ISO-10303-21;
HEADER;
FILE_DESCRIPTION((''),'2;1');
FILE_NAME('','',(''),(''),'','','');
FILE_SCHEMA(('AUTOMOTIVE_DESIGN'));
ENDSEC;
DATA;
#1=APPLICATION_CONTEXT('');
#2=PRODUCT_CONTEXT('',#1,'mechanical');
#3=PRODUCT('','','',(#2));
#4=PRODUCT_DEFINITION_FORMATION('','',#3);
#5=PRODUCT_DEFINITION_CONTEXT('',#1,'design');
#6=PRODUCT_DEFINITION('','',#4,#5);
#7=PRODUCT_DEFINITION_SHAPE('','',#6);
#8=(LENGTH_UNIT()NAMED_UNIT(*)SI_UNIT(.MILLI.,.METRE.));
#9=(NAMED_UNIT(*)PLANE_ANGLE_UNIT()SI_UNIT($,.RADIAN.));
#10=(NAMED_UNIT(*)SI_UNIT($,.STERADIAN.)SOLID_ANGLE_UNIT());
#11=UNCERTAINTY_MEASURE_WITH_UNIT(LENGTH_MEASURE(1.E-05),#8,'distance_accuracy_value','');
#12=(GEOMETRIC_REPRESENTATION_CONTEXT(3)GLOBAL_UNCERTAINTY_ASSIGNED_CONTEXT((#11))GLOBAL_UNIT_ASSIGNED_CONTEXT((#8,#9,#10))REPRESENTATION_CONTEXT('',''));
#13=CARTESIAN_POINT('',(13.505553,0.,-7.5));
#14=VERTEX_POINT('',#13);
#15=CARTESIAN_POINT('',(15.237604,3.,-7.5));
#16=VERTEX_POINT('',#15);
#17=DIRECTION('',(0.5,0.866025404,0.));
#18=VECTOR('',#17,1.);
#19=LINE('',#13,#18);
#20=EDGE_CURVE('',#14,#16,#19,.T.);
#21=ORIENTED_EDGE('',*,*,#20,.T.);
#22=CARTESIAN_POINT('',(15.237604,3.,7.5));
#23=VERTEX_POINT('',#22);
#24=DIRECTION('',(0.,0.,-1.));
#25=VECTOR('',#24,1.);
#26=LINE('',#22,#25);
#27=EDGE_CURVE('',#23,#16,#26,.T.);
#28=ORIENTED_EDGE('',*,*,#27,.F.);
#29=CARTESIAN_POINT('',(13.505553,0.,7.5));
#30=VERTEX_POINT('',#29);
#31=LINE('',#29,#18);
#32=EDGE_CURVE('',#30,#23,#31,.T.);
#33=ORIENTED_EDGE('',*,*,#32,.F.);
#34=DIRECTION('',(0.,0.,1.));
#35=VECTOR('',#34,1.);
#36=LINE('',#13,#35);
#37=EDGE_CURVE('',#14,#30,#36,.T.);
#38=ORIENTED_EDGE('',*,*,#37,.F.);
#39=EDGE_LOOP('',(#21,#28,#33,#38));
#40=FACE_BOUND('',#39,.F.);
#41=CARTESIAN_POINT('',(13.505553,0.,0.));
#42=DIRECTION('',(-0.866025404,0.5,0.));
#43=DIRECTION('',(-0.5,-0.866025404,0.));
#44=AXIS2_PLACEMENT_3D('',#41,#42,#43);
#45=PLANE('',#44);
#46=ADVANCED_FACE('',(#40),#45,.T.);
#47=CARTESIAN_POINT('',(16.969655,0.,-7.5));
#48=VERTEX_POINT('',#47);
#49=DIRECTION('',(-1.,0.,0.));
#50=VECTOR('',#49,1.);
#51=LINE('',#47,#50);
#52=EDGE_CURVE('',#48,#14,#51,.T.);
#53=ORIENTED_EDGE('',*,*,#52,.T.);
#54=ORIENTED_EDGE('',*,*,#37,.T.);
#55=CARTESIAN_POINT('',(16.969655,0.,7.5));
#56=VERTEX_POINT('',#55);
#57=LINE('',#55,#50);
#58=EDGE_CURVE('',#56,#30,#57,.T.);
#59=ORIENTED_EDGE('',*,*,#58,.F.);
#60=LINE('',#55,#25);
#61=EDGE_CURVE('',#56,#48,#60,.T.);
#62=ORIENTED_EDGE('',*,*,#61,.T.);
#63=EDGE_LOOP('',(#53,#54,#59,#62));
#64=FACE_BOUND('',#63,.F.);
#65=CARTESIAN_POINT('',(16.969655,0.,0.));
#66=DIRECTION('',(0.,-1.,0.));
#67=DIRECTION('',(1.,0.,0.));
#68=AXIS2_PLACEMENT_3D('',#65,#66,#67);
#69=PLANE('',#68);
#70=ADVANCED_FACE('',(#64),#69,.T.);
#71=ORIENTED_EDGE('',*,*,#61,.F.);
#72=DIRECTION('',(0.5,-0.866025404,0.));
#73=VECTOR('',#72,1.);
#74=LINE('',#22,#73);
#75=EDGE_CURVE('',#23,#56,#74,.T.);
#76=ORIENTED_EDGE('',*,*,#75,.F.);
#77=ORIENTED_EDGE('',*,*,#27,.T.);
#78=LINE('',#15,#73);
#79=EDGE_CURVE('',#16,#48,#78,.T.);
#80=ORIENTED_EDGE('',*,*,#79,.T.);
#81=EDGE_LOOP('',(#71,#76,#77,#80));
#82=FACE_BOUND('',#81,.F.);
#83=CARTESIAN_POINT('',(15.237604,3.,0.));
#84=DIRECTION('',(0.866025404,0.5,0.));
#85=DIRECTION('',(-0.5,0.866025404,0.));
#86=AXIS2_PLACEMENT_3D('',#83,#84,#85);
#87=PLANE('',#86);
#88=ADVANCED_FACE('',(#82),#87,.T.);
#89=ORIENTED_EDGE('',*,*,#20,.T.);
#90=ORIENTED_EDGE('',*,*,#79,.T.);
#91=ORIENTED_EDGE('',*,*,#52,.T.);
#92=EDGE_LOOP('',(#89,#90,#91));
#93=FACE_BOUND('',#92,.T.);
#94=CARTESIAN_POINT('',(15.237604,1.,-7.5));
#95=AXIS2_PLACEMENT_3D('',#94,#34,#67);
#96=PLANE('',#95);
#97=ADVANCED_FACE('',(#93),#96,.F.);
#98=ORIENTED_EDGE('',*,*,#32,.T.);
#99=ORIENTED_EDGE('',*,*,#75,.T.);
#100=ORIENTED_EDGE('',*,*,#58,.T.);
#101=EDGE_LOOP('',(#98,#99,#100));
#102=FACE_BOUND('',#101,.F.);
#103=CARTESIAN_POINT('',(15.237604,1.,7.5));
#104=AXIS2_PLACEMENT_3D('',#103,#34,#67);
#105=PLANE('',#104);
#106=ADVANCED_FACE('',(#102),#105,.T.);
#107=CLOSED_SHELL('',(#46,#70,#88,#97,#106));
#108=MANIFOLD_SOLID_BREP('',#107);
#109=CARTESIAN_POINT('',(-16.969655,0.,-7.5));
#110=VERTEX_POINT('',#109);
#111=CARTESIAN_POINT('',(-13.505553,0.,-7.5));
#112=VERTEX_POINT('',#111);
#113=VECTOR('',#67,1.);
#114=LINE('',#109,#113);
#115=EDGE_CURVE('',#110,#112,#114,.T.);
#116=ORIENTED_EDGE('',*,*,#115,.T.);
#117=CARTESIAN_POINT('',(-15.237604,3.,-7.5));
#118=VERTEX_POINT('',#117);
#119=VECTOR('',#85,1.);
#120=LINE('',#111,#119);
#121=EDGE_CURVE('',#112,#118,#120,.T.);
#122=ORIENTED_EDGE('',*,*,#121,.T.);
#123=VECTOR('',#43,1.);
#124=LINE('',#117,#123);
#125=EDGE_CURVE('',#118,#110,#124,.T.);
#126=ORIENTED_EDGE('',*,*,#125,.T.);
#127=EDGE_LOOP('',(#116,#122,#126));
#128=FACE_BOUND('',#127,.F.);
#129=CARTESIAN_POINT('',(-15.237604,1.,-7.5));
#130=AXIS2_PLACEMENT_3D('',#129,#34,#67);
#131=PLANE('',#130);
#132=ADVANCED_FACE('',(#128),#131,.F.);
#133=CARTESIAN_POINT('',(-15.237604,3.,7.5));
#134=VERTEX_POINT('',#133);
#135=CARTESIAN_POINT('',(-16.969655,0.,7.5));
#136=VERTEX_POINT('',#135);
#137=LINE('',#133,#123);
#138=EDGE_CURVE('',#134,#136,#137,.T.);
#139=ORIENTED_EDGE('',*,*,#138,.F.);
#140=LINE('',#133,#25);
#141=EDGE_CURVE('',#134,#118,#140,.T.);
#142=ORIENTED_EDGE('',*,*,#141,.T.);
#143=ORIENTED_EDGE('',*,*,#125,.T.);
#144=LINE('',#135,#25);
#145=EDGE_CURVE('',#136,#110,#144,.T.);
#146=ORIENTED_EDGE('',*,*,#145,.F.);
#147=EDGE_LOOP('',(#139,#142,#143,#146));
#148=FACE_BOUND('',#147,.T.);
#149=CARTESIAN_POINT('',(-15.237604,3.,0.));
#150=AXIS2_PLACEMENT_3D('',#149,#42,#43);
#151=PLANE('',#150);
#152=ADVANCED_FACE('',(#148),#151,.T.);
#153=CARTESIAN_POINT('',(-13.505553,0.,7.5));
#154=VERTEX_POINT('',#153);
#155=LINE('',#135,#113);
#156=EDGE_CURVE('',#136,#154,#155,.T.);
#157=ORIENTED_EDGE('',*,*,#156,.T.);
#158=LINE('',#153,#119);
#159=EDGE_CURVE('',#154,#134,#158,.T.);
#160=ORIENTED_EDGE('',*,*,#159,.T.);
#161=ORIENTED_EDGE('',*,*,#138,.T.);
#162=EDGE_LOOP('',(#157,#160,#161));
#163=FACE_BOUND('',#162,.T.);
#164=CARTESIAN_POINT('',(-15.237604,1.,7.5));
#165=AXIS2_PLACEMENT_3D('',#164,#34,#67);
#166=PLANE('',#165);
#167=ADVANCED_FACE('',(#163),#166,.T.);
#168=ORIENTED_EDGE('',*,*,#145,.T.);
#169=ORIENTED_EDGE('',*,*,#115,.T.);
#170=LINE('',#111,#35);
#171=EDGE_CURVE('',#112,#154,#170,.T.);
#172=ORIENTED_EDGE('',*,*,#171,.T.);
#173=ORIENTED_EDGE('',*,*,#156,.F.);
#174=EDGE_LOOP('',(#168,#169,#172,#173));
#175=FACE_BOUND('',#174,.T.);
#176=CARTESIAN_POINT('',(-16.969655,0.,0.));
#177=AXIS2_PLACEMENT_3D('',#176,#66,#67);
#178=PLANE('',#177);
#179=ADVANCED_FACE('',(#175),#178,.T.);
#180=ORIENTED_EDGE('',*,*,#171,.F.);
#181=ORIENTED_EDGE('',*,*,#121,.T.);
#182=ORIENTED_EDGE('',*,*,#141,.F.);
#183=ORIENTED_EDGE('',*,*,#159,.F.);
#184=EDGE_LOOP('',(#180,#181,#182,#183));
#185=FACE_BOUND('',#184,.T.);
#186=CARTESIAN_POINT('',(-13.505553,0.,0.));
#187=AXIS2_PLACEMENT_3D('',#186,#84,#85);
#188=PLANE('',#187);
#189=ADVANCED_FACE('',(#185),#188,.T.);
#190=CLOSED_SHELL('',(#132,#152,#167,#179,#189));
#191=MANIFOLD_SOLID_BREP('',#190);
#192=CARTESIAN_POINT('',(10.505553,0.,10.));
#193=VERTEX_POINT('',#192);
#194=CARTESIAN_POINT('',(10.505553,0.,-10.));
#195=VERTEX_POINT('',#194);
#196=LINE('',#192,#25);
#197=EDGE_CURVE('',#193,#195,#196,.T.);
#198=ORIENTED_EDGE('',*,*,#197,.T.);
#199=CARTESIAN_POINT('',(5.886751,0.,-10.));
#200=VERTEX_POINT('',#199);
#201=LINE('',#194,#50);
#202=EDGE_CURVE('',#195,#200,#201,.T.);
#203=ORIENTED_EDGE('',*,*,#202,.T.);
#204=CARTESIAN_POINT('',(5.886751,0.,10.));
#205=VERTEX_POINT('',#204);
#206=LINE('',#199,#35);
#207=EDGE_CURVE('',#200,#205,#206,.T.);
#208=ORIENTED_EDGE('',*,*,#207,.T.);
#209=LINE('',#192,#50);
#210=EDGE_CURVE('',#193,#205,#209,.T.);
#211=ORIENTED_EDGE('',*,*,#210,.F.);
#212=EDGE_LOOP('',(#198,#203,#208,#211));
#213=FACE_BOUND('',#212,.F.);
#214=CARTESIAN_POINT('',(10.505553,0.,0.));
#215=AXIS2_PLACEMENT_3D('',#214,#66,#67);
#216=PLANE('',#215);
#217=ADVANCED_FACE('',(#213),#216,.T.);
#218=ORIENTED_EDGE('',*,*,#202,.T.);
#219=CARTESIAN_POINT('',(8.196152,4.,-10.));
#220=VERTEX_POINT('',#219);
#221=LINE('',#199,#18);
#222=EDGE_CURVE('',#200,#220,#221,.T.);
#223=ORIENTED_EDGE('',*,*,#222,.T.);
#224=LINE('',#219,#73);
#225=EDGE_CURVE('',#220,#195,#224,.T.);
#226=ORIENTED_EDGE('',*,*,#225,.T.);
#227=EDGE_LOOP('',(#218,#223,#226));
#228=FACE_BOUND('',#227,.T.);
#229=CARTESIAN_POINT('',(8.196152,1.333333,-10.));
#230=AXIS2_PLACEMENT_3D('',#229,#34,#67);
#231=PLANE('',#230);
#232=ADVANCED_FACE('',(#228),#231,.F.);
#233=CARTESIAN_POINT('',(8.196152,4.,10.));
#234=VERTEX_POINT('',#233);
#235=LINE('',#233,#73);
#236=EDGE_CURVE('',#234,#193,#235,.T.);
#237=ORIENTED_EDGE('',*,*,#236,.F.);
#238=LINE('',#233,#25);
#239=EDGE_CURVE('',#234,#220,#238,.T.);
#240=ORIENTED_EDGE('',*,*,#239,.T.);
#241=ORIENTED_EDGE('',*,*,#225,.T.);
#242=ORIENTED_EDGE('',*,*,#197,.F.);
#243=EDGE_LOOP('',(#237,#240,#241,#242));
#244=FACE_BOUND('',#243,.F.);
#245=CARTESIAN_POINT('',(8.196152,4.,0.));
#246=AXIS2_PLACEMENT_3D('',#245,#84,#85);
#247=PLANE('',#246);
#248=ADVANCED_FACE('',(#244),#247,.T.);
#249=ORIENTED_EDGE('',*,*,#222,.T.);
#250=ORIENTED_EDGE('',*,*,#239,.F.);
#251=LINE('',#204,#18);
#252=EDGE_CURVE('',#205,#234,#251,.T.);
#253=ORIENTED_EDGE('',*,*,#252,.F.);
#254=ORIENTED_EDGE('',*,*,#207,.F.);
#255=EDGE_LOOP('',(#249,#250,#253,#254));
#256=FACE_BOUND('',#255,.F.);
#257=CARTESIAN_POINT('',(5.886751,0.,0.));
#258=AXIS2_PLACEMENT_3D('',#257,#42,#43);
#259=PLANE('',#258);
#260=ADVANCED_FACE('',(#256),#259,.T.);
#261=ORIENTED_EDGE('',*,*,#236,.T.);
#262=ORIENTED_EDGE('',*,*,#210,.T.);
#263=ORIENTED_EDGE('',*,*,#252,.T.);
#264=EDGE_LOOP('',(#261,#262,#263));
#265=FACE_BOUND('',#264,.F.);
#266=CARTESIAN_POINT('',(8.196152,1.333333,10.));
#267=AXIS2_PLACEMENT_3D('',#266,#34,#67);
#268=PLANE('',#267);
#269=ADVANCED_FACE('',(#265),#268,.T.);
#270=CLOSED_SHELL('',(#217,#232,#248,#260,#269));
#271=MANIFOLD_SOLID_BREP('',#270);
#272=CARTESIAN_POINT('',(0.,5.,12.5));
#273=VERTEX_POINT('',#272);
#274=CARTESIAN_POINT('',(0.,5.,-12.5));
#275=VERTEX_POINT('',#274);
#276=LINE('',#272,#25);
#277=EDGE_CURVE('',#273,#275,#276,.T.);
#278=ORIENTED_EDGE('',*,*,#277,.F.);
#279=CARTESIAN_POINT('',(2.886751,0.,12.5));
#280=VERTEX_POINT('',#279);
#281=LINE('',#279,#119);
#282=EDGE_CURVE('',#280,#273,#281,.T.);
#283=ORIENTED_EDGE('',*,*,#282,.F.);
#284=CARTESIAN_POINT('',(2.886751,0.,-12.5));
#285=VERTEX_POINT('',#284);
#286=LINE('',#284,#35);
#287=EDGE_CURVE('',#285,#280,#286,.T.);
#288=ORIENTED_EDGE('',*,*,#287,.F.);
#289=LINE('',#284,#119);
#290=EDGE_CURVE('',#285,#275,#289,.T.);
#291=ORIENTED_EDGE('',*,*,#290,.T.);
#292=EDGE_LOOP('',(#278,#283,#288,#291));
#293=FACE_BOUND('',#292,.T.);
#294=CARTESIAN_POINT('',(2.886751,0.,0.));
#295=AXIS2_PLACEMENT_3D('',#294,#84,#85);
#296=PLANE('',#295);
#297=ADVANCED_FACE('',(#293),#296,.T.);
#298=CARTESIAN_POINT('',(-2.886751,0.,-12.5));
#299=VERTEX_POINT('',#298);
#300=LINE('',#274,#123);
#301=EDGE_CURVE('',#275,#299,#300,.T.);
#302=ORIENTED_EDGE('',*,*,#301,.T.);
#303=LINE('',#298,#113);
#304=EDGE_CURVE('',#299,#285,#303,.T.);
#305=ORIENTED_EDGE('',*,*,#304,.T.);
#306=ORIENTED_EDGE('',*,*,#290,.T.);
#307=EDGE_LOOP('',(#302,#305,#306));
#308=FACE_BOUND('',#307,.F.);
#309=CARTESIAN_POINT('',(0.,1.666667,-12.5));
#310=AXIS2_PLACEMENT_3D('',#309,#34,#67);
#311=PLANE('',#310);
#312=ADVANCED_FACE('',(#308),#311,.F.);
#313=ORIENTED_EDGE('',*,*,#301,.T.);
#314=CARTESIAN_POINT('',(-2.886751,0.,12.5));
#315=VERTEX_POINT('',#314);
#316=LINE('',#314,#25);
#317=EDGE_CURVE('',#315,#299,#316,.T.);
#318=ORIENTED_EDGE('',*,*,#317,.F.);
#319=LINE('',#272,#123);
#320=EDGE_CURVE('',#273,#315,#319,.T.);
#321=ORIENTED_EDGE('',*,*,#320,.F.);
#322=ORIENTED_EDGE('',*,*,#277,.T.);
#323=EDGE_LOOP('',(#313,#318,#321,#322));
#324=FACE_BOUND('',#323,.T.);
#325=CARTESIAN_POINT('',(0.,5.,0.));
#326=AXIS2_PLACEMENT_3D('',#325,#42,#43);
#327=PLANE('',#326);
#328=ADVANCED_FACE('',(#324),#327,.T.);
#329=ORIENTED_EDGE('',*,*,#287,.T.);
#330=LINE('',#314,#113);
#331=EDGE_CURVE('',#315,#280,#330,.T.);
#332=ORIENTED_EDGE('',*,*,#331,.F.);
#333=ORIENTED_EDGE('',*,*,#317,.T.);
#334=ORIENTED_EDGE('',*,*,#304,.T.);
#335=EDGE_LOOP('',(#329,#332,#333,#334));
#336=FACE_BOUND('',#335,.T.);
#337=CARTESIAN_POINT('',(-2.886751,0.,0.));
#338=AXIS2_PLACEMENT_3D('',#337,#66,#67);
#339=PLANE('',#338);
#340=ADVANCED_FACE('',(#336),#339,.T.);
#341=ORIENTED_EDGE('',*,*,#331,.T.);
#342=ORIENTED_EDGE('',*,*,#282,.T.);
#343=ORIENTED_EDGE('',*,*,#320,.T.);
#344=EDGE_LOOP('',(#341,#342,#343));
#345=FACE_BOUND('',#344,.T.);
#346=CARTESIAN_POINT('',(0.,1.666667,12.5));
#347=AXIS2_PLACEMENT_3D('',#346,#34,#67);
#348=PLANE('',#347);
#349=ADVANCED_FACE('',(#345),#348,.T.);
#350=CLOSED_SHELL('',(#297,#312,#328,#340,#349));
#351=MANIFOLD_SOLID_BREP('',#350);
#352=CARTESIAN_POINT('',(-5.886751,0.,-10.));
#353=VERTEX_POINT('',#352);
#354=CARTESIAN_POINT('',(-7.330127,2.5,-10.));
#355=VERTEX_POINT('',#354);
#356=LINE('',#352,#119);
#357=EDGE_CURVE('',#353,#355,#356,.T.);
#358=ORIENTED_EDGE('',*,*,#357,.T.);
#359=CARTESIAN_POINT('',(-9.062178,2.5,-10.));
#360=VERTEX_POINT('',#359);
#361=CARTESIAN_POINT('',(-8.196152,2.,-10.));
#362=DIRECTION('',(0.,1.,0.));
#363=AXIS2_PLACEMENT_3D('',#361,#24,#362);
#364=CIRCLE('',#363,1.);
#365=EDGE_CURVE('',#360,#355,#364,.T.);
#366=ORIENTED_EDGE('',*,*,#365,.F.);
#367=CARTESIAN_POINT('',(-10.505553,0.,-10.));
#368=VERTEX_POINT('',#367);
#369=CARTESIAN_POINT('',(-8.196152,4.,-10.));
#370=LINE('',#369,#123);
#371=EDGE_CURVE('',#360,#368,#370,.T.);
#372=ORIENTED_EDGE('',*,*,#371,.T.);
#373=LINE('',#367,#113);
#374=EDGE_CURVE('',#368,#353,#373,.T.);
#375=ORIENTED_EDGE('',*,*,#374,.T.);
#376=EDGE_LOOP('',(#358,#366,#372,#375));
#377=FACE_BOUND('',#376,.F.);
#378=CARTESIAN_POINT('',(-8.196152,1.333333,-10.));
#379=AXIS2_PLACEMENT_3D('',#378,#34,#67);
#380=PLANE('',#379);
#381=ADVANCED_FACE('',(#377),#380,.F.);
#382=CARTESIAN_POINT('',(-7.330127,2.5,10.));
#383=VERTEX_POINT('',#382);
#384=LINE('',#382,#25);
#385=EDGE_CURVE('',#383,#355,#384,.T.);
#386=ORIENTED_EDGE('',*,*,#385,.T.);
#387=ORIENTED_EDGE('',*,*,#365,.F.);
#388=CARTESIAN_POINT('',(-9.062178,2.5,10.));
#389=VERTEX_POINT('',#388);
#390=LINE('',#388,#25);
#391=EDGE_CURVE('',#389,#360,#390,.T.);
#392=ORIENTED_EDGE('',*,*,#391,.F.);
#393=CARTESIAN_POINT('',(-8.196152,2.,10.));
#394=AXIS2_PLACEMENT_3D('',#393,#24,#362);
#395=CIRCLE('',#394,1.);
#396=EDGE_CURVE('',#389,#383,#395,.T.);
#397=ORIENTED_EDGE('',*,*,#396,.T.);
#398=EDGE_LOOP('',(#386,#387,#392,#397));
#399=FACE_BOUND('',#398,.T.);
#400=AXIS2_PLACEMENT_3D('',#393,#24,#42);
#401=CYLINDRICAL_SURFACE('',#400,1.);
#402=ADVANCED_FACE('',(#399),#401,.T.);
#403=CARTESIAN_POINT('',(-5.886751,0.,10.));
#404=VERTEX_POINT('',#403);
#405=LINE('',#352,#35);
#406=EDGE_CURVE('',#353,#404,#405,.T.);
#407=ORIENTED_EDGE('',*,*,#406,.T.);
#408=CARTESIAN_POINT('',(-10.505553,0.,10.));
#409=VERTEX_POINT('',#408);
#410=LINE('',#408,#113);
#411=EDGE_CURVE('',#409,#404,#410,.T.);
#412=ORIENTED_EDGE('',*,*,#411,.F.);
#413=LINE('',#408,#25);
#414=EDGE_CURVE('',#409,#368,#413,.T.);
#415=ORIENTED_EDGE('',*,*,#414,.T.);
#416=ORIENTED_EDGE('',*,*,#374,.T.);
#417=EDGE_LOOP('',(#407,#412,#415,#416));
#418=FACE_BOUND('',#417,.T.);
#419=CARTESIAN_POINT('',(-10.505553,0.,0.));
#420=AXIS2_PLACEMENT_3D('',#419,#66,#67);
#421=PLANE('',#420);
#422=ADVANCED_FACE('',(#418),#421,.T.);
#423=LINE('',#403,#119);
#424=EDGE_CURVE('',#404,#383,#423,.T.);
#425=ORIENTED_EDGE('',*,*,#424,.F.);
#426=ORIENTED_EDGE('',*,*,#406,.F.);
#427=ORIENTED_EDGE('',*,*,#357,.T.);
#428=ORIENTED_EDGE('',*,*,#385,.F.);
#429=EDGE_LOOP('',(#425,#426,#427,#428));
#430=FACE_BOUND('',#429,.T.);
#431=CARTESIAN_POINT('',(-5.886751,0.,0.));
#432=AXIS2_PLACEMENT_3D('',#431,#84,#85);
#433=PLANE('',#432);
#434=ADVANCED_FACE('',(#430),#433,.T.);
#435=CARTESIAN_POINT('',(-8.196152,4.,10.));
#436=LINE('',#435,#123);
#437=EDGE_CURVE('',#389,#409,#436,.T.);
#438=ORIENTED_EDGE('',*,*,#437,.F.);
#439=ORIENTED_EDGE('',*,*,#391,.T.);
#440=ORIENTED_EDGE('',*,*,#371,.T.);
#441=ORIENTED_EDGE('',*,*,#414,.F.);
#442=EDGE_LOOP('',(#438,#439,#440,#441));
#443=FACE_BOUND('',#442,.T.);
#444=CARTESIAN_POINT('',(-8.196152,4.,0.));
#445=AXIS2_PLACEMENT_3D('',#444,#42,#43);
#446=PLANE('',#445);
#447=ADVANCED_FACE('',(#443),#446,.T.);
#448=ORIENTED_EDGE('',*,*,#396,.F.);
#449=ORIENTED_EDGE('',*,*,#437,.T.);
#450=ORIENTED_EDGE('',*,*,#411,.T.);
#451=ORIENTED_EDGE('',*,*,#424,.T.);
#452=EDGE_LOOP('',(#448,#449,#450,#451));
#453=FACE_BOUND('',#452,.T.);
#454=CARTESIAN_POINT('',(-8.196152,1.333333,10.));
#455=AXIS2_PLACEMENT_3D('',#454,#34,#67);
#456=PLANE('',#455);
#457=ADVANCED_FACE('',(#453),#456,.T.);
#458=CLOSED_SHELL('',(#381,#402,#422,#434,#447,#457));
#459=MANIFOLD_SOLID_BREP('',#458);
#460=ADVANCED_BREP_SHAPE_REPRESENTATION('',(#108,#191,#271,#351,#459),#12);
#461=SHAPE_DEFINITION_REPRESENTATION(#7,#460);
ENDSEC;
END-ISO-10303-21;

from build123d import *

# Parameters (mm, degrees)
F1_DEPTH = 12.5
F2_DEPTH = 10
F3_DEPTH = 7.5
F7_R     = 1


# Not quite as in the source:
# - the program builds the solid bodies; features that only make, move or delete a surface that nothing else refers to are left out


with BuildPart() as f1:
    # F0 (on Top) → F1 (new body, symmetric)
    with BuildSketch(Plane.XY):
        Polygon((-2.8867513459, 0), (2.8867513459, 0), (0, 5), align=None)
    extrude(amount=F1_DEPTH, both=True)


with BuildPart() as f2:
    # F0 (on Top) → F2 (new body, symmetric)
    with BuildSketch(Plane.XY):
        Polygon((-10.5055534995, 0), (-5.8867513459, 0), (-8.1961524227, 4), align=None)
    extrude(amount=F2_DEPTH, both=True)


with BuildPart() as f3:
    # F0 (on Top) → F3 (new body, symmetric)
    with BuildSketch(Plane.XY):
        Polygon((-16.9696551146, 0), (-13.5055534995, 0), (-15.237604307, 3), align=None)
    extrude(amount=F3_DEPTH, both=True)


with BuildPart() as f4_1:
    # F4: instance of F2
    add(f2.part.mirror(Plane.YZ))


with BuildPart() as f4_2:
    # F4: instance of F3
    add(f3.part.mirror(Plane.YZ))


with BuildPart() as f2_1:
    add(f2.part)

    # F7
    f7_edges = [f2_1.edges().sort_by_distance(p)[0] for p in [
        (-8.196152, 4, 0),
    ]]
    fillet(f7_edges, radius=F7_R)


solid = Compound([f1.part, f3.part, f4_1.part, f4_2.part, f2_1.part])
